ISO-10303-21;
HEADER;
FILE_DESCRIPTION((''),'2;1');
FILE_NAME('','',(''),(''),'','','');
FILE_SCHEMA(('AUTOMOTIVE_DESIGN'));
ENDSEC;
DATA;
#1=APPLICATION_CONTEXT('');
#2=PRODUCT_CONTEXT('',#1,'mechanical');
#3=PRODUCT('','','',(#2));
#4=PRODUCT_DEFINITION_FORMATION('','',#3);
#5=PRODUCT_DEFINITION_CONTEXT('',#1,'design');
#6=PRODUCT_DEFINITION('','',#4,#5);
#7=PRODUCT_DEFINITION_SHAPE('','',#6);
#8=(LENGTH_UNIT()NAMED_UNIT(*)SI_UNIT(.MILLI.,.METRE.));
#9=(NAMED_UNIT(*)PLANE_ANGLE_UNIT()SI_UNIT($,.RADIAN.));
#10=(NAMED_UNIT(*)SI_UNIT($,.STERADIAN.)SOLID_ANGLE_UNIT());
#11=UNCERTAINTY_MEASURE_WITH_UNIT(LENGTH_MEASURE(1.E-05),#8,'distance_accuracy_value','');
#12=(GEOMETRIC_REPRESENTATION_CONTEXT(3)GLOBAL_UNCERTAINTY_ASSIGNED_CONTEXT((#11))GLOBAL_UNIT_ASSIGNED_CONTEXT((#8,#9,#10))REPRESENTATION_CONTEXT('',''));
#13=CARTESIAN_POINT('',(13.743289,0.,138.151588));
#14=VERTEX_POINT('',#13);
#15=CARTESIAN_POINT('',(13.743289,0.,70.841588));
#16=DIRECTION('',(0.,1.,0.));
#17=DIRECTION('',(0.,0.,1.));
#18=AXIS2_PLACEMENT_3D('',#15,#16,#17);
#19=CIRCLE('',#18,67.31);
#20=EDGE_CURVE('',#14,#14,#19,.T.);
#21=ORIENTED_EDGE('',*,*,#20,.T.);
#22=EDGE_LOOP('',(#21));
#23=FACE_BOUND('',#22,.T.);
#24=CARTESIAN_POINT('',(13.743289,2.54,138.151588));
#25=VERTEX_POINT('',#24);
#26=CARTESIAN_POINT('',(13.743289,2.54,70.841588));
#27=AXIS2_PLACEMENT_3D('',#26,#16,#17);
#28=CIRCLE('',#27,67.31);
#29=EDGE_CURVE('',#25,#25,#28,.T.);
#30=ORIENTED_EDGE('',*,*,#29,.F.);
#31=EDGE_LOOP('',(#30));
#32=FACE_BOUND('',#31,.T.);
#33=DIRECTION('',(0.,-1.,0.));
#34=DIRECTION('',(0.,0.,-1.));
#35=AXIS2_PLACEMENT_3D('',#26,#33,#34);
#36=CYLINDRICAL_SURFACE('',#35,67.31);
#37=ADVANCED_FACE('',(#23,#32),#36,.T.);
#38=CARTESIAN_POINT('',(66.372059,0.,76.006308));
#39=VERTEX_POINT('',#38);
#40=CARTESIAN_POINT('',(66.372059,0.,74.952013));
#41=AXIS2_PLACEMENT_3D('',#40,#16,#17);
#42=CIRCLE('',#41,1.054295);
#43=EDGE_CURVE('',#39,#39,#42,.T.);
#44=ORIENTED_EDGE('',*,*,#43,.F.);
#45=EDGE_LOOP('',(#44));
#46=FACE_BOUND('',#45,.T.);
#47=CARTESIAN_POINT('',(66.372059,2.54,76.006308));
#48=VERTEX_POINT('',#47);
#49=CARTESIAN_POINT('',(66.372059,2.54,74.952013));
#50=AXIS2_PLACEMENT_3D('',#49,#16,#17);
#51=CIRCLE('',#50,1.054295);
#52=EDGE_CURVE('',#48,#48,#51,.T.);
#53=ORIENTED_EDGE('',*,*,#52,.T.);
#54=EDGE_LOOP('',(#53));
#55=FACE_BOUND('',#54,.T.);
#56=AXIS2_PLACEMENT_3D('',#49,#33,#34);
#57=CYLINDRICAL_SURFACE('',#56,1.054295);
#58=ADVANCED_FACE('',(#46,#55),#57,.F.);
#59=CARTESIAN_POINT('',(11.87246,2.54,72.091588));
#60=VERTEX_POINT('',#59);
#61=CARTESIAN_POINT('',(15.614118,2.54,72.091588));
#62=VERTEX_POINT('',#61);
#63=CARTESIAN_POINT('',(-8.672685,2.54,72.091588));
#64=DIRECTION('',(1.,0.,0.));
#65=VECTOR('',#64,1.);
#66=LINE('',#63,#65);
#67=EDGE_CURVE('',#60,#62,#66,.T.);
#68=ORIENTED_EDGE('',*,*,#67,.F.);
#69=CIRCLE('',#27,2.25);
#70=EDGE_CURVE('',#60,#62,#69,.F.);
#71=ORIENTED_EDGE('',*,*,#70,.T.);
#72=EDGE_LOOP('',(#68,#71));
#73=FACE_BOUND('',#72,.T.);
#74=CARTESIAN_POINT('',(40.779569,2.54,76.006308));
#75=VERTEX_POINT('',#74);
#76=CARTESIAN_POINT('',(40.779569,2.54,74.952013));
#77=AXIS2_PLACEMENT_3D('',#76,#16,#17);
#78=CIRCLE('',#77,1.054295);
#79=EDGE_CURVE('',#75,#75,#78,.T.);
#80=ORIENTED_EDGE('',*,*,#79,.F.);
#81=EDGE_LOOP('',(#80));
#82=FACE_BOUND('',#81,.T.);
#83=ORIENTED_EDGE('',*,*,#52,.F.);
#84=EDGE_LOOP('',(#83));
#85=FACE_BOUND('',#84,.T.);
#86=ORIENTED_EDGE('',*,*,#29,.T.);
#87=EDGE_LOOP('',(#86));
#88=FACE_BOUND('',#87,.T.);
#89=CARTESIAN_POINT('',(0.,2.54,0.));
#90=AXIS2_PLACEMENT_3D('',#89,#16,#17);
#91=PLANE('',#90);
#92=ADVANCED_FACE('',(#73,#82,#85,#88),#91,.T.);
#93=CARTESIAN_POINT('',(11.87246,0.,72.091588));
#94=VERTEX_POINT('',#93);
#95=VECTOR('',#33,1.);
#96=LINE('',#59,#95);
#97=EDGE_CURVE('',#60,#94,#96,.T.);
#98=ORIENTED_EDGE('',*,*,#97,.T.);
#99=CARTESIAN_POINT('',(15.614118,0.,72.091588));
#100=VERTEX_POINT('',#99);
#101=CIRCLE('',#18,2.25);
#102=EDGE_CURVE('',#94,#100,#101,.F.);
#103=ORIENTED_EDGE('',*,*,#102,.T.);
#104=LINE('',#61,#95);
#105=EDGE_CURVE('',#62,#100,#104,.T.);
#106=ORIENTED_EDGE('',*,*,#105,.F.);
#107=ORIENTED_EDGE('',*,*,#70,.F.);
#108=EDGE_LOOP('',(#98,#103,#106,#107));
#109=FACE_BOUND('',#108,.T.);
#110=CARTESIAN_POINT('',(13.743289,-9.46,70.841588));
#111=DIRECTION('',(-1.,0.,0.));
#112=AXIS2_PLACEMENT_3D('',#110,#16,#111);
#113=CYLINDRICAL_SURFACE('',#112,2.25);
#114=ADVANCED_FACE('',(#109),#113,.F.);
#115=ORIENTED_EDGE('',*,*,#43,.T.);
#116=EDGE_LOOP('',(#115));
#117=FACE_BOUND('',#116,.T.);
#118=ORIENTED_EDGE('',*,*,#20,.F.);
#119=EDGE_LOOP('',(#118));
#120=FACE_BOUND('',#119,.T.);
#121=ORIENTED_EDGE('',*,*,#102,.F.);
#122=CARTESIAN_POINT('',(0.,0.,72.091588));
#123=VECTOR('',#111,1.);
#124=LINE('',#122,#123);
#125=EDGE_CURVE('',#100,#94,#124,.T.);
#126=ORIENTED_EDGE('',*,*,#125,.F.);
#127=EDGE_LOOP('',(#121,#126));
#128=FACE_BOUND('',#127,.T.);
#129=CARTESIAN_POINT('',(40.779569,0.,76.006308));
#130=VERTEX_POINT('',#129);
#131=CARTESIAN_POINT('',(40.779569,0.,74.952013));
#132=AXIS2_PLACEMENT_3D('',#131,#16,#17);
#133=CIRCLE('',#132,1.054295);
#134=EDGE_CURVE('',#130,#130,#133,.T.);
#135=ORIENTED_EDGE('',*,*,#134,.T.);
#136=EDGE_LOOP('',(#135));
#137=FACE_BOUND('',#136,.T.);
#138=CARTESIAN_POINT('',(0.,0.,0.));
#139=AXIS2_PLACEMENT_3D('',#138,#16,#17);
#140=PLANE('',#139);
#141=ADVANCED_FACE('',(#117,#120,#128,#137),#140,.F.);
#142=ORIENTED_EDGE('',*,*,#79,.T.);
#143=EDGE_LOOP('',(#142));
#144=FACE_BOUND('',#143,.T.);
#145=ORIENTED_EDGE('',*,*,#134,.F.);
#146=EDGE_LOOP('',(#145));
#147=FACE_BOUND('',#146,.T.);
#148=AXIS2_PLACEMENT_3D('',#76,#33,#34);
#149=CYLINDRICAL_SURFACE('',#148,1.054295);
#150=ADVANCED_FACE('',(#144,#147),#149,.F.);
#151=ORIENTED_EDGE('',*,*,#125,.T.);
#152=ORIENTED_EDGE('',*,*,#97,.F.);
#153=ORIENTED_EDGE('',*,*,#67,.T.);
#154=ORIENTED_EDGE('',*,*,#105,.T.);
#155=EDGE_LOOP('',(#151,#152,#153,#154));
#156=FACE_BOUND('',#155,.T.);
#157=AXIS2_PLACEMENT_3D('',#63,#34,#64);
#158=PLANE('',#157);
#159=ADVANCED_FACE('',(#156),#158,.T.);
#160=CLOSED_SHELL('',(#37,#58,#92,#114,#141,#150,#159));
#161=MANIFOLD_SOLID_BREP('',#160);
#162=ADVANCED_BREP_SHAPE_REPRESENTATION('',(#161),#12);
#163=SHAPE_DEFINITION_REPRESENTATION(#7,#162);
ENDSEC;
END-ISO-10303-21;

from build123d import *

# Parameters (mm, degrees)
RECORD_R             = 67.31
RECORD_R_2           = 1.054294776
RECORD_EXTRUDE_DEPTH = 2.54
MOTOR_HOLE_DEPTH     = 2.54


# Read off the part's stored shape, not the designer's step: Motor Hole
with BuildPart() as part:
    # Record → Record Extrude (new body)
    with BuildSketch(Plane(origin=(0, 0, 0), x_dir=(1, 0, 0), z_dir=(0, 1, 0))):
        with Locations(Location((13.743289035, -70.841587708, 0), (0, 0, 270))):
            Circle(RECORD_R)
        with Locations(Location((66.372058646, -74.952013208, 0), (0, 0, 270))):
            Circle(RECORD_R_2, mode=Mode.SUBTRACT)
        with Locations(Location((40.779568941, -74.952013208, 0), (0, 0, 270))):
            Circle(RECORD_R_2, mode=Mode.SUBTRACT)
    extrude(amount=RECORD_EXTRUDE_DEPTH)

    # Motor Hole outline → Motor Hole (cut)
    with BuildSketch(Plane(origin=(0, 0, 0), x_dir=(1, 0, 0), z_dir=(0, 1, 0))):
        with BuildLine():
            Line((11.872460342, -72.091587708), (15.614117728, -72.091587708))
            ThreePointArc((15.614117728, -72.091587708), (13.743289035, -68.591587708), (11.872460342, -72.091587708))
        make_face()
    extrude(amount=MOTOR_HOLE_DEPTH, mode=Mode.SUBTRACT)


solid = part.part
